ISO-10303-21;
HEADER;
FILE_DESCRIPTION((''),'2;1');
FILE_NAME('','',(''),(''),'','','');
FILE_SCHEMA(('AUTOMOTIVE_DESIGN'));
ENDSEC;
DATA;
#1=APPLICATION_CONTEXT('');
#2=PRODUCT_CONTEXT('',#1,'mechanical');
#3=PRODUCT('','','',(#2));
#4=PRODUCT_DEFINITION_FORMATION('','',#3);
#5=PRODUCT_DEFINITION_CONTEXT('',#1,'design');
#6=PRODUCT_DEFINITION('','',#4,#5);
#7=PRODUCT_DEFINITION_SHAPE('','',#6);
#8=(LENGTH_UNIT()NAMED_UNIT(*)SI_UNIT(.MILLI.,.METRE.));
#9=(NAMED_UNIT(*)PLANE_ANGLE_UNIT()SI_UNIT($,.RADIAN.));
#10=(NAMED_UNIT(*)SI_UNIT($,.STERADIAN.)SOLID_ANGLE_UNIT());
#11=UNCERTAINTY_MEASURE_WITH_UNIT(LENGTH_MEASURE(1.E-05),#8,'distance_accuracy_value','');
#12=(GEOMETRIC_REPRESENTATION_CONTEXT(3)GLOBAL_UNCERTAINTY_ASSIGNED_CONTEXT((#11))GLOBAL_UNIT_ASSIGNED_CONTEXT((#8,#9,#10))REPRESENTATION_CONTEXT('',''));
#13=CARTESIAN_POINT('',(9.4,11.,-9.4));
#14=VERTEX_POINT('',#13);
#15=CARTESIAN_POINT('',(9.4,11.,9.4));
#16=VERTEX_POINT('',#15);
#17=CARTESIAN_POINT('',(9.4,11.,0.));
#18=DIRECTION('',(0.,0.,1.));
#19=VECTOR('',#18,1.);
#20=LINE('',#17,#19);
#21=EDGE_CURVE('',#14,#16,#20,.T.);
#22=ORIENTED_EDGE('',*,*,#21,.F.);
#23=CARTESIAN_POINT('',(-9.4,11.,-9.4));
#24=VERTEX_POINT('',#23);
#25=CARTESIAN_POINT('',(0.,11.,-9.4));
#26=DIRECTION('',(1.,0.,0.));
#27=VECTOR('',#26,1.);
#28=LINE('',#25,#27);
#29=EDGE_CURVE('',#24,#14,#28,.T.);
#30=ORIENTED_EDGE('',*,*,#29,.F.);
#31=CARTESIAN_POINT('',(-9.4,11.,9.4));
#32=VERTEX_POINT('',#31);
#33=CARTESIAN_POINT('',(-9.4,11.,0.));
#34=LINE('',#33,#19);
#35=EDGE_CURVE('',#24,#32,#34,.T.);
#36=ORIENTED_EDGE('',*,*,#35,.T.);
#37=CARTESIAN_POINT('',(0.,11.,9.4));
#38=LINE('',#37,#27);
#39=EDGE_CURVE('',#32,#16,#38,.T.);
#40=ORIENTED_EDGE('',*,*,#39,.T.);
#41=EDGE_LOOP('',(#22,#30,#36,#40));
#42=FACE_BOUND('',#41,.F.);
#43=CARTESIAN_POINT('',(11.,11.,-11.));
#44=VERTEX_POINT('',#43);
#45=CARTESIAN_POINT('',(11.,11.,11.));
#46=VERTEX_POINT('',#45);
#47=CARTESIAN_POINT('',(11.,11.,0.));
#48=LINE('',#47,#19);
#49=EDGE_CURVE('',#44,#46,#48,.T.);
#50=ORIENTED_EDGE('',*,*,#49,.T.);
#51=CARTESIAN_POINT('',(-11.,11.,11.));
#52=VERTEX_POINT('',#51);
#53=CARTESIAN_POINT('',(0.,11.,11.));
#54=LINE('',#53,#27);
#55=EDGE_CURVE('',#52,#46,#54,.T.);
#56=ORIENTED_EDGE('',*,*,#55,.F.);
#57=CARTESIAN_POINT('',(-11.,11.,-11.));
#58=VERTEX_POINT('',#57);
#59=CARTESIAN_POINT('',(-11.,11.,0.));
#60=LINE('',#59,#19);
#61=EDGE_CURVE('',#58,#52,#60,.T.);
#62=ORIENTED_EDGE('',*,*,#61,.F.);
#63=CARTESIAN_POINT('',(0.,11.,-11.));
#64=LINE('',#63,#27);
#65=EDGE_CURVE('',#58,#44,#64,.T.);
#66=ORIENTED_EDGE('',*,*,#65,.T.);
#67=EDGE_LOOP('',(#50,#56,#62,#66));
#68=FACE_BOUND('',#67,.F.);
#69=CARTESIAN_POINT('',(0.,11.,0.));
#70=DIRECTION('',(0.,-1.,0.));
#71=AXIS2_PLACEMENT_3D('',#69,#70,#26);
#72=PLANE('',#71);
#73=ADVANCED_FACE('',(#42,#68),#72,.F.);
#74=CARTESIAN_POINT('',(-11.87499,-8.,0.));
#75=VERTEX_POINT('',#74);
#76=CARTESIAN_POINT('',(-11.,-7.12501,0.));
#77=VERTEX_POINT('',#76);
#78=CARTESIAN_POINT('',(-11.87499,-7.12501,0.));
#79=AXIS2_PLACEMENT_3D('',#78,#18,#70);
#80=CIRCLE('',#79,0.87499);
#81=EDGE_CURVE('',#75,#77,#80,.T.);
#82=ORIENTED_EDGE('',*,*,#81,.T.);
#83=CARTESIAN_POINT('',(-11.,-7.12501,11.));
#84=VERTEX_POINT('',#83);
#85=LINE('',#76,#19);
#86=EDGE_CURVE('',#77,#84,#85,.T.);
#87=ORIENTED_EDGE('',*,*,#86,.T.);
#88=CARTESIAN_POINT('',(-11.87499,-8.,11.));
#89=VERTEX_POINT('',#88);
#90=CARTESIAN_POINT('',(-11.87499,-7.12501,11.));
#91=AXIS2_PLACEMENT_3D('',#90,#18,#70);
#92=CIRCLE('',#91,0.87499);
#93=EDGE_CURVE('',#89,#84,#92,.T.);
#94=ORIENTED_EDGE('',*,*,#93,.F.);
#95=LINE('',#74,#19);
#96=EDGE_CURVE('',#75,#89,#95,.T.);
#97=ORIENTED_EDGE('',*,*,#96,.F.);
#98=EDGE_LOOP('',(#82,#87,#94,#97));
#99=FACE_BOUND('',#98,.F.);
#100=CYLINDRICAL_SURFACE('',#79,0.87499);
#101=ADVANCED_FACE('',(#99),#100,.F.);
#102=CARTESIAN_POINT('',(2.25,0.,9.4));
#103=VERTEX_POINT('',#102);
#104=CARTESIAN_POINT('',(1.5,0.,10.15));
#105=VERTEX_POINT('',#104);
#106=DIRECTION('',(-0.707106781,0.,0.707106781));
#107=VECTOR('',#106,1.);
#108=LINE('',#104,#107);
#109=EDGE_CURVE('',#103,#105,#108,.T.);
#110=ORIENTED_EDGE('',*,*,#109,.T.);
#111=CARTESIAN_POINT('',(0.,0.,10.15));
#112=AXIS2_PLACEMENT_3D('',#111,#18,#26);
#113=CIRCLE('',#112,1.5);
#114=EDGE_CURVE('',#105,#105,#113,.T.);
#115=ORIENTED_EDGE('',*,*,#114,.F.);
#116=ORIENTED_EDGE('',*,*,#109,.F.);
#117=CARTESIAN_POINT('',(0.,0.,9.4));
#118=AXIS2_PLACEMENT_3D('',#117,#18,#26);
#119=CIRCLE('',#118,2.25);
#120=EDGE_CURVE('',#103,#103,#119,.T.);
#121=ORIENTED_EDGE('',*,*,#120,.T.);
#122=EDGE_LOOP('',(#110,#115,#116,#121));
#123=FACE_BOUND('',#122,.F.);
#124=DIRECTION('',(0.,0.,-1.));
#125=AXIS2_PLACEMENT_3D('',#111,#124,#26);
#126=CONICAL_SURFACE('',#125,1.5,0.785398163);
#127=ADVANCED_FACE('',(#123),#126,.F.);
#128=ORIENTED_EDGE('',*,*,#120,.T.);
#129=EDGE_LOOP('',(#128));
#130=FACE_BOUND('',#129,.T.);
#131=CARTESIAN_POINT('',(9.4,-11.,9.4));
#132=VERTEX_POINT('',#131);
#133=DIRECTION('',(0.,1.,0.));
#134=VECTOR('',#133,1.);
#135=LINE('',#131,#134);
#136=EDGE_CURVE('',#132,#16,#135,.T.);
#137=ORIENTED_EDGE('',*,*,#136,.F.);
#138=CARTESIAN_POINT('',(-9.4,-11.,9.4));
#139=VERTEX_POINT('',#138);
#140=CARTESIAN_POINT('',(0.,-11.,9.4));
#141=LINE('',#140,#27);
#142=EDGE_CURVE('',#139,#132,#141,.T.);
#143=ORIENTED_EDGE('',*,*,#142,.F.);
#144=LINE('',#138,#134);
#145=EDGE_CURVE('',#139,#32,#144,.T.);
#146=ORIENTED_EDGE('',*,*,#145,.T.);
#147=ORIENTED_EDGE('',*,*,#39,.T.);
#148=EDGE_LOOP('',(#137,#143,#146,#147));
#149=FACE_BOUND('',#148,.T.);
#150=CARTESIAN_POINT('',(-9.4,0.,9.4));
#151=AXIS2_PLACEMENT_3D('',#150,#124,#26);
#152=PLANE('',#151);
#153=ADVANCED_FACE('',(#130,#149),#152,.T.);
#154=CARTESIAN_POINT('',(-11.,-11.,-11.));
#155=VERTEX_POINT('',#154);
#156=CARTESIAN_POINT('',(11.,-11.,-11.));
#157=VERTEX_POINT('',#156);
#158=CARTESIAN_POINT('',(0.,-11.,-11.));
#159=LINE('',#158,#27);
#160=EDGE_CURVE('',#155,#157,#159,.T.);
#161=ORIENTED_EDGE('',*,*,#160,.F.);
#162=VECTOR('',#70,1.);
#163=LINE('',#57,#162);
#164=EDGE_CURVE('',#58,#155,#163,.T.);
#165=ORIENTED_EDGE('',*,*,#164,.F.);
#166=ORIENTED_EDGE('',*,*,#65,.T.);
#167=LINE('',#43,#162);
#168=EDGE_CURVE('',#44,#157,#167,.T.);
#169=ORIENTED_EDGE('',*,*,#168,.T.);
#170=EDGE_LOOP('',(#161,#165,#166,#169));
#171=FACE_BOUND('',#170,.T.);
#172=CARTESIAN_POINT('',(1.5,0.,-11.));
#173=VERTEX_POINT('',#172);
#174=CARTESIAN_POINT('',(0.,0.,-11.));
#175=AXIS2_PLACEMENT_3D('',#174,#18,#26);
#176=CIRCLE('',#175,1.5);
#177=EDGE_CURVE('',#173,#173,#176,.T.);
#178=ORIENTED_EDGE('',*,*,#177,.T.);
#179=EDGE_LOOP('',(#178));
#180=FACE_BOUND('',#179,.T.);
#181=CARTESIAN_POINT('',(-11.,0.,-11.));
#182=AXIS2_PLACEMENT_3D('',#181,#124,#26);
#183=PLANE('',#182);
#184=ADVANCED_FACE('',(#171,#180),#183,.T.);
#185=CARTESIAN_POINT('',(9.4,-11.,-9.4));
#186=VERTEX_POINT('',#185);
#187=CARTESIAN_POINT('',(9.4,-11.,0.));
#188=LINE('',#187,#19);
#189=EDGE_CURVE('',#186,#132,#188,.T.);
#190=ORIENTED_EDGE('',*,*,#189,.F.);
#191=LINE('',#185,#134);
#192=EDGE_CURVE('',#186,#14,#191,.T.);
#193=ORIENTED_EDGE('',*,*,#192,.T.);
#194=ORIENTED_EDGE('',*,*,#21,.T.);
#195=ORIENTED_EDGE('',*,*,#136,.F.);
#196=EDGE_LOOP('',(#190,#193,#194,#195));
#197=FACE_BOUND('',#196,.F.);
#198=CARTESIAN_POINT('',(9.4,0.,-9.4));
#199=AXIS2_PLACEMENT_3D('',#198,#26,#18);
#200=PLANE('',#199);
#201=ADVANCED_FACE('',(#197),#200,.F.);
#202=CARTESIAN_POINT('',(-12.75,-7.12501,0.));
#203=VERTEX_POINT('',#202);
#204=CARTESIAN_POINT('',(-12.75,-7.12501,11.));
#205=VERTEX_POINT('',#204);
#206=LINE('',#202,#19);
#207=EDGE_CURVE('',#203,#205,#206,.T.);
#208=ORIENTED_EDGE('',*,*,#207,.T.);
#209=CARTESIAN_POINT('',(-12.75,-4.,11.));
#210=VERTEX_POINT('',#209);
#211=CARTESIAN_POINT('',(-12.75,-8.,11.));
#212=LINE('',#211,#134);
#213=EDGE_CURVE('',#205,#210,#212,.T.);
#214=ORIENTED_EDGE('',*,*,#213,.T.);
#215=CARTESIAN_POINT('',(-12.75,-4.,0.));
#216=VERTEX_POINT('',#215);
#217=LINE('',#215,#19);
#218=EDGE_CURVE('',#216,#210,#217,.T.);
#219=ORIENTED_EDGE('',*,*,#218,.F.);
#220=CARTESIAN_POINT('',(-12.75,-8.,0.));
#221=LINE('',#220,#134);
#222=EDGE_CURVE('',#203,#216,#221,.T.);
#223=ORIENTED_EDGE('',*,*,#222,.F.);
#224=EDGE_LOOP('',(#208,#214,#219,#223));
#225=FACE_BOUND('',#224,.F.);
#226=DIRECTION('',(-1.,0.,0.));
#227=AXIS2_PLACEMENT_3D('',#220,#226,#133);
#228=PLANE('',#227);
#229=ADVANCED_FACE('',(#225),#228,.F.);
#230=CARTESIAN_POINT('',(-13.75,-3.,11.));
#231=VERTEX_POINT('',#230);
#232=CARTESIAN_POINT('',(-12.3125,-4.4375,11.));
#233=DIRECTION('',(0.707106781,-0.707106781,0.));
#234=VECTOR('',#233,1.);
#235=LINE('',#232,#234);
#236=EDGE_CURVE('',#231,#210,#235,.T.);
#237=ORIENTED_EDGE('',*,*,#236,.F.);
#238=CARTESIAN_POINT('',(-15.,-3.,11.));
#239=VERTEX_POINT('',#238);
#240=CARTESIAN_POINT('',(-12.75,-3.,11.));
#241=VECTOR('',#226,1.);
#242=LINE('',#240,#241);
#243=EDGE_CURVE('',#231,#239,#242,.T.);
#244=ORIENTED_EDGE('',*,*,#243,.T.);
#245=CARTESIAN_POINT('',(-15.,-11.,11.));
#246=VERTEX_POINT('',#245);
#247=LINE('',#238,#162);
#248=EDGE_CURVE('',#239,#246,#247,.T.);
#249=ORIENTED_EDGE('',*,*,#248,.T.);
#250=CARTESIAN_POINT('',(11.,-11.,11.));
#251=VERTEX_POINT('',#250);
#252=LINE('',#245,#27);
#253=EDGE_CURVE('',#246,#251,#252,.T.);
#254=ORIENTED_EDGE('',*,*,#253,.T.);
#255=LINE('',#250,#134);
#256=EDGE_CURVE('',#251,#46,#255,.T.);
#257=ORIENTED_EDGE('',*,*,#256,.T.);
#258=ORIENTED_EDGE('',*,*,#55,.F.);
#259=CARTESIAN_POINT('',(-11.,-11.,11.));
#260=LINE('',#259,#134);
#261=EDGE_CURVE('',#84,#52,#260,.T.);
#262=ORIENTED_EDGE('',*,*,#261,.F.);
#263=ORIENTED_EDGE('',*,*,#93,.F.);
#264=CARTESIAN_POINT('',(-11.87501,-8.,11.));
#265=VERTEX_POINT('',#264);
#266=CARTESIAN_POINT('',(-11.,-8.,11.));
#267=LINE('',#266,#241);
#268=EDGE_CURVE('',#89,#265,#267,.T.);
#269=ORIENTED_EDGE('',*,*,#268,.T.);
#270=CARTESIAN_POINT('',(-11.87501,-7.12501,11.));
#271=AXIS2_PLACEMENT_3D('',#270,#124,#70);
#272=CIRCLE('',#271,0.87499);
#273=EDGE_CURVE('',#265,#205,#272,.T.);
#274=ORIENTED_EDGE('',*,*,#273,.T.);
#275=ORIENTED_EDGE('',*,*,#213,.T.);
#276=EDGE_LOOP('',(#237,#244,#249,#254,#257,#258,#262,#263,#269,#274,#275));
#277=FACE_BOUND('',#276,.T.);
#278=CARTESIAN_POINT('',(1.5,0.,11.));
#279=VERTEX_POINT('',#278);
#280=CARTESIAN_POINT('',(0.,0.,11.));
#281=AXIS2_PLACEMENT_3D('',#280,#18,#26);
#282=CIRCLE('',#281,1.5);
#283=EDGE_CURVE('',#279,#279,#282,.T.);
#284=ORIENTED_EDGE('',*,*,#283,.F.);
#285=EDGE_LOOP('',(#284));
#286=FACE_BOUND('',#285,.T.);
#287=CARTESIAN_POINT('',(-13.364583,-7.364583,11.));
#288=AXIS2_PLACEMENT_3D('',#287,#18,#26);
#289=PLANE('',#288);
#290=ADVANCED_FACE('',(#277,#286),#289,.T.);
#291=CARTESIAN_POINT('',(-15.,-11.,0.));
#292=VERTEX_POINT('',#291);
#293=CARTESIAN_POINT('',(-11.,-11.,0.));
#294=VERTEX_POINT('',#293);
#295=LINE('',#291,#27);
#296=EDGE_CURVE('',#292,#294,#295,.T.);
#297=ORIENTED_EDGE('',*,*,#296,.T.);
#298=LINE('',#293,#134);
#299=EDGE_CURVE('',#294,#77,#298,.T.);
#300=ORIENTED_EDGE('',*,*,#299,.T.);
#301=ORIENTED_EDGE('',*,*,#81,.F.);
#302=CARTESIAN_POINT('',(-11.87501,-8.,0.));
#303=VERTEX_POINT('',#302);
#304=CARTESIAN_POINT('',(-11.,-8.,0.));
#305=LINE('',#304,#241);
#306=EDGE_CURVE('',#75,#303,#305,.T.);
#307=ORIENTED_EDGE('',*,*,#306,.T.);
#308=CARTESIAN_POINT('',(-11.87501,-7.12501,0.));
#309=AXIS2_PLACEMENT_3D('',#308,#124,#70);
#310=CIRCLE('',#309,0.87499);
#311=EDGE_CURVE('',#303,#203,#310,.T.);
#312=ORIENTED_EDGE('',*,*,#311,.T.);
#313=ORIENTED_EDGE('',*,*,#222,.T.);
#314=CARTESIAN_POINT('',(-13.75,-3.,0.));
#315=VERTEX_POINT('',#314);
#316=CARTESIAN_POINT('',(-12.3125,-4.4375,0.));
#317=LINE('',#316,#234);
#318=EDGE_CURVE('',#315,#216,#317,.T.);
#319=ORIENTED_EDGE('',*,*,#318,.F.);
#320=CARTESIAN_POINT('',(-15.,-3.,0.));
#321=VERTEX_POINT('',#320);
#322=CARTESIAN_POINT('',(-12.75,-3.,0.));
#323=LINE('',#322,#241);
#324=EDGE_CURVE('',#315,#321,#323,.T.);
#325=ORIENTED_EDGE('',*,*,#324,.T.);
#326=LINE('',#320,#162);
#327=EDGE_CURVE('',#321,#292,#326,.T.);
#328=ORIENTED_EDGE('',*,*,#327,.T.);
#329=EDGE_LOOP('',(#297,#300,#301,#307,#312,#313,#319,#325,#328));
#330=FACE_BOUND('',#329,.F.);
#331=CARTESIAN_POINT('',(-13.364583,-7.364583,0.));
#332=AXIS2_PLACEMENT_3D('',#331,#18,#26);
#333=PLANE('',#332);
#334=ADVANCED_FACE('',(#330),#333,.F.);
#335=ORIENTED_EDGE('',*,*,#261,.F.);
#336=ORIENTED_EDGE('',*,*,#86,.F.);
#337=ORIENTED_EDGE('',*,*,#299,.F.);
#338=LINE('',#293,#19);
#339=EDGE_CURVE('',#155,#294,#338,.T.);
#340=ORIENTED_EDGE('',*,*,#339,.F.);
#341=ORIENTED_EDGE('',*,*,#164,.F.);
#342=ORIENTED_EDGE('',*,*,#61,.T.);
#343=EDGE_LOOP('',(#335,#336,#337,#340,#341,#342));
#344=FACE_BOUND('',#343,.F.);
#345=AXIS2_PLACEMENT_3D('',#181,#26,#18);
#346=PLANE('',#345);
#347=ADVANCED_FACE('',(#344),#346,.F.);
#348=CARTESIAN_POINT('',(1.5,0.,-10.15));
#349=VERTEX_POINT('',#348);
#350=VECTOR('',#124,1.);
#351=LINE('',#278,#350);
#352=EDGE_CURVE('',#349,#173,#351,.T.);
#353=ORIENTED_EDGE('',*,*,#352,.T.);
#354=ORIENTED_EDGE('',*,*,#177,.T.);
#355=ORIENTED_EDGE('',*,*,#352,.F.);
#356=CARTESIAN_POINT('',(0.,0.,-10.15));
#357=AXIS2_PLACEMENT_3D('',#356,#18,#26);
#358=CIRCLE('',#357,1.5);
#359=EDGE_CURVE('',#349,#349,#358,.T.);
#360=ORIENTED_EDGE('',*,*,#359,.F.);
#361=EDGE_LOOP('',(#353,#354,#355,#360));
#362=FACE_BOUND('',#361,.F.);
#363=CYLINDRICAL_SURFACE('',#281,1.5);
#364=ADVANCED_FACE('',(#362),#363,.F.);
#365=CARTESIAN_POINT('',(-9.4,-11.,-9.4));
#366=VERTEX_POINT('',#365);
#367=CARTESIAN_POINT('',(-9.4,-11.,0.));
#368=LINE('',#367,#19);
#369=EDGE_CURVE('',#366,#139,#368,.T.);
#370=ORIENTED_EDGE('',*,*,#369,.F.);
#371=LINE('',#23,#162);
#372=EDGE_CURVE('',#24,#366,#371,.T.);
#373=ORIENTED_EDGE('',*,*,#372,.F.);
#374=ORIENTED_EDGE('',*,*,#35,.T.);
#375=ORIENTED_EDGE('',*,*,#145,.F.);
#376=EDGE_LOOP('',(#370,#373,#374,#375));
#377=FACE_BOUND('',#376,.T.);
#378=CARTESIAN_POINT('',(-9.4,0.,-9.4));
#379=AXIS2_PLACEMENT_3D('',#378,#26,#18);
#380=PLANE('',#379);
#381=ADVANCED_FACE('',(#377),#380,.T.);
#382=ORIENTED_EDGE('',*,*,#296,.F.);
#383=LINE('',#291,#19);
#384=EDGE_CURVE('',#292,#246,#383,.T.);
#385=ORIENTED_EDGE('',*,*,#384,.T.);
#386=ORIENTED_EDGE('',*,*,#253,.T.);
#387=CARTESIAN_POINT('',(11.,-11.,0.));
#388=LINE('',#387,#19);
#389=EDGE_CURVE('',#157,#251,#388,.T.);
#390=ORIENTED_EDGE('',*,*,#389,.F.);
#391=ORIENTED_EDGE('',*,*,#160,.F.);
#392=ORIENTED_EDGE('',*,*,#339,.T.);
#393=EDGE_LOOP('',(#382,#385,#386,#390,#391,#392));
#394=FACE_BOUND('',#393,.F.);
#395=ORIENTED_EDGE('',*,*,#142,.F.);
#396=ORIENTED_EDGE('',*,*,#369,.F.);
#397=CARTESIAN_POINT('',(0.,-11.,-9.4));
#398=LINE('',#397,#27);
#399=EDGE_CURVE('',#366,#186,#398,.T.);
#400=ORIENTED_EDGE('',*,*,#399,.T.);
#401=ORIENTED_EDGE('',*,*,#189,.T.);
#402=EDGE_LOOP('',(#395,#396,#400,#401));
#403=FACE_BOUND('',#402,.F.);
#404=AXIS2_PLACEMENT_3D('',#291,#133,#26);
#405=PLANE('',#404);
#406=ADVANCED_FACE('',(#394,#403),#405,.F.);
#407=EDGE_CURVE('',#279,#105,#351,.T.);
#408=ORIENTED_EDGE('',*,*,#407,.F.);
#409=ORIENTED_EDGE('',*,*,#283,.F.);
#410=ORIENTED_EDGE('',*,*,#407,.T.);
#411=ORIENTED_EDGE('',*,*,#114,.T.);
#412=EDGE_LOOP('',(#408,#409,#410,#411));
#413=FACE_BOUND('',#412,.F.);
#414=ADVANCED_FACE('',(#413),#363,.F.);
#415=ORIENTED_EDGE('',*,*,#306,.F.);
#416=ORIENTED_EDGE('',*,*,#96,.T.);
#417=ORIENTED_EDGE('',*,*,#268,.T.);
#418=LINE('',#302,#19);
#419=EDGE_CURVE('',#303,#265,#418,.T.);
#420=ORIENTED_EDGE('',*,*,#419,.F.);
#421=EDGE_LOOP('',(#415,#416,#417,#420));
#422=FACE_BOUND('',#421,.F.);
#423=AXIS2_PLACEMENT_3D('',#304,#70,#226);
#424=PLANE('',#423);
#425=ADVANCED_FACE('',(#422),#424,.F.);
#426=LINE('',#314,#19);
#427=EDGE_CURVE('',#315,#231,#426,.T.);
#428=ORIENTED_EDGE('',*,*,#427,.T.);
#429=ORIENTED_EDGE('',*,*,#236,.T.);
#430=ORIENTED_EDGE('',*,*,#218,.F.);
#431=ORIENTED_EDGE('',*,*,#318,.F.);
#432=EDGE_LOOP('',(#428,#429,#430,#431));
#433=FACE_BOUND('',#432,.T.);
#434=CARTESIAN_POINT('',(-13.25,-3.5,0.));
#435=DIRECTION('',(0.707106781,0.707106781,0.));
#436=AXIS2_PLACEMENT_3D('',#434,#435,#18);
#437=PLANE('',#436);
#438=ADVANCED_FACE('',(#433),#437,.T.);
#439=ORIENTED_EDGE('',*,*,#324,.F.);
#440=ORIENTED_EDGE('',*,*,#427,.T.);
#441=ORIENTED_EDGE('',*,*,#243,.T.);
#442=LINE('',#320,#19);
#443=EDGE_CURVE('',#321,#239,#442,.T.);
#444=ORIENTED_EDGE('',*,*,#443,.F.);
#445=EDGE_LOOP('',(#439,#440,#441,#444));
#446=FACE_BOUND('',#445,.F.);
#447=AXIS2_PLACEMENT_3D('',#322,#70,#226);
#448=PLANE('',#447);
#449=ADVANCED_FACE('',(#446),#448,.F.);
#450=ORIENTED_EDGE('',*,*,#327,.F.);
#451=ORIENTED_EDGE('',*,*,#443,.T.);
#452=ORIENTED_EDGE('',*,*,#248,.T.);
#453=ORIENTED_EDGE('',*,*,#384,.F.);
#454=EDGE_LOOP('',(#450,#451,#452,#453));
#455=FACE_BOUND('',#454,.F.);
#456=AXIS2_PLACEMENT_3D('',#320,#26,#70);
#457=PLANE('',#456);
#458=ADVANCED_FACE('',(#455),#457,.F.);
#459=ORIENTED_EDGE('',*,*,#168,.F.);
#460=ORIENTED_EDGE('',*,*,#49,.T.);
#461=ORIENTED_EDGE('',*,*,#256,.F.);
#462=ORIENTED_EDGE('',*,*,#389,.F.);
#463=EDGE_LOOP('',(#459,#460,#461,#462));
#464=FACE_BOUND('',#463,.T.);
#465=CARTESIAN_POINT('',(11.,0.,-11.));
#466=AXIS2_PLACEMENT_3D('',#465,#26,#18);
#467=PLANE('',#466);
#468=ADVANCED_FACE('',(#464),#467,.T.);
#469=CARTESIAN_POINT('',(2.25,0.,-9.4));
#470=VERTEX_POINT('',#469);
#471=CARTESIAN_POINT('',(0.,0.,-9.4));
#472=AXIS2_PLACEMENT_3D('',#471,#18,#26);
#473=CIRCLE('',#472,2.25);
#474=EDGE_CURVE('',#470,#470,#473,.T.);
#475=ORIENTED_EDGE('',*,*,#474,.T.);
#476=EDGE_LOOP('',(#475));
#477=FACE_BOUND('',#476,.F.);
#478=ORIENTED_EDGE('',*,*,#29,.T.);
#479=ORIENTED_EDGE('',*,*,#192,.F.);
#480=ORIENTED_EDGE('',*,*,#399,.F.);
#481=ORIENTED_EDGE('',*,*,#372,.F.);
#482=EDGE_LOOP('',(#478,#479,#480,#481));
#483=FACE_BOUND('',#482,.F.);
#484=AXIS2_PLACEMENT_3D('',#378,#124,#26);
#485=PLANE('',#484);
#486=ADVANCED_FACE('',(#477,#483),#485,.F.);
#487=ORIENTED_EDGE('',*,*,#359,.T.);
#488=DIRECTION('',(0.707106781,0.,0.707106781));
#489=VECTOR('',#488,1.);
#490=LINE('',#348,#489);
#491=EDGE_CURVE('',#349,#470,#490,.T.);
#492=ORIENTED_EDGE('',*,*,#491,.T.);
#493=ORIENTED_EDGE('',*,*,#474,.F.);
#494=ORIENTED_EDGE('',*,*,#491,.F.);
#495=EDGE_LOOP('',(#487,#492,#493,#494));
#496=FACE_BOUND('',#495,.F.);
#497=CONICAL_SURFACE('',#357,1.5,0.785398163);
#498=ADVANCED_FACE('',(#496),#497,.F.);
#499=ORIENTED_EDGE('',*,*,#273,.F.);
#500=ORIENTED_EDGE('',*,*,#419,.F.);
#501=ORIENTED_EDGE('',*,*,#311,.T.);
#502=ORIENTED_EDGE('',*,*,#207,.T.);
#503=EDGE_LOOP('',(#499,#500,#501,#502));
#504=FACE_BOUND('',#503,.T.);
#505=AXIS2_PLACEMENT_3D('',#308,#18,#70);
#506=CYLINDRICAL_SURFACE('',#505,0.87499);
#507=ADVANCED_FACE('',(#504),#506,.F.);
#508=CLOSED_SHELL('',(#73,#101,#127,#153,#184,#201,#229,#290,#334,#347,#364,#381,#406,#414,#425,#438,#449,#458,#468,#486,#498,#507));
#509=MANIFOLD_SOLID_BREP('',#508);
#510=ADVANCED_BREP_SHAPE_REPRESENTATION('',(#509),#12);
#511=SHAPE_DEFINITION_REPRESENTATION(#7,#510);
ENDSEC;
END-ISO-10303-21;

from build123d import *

# Parameters (mm, degrees)
F0_W     = 22
F0_H     = 22
F0_W_2   = 18.8
F0_H_2   = 18.8
F1_DEPTH = 11
F2_R     = 1.5
F3_DEPTH = 25
F4_SIZE  = 0.75
F6_DEPTH = 11
F7_R     = 0.87499
F8_SIZE  = 1


# Not quite as in the source:
# - a fillet or chamfer is up to 0.001 mm smaller than in the source, because OpenCascade refuses the exact size


with BuildPart() as f1:
    # F0 (on Front) → F1 (new body, symmetric)
    with BuildSketch(Plane.XZ):
        Rectangle(F0_W, F0_H)
        Rectangle(F0_W_2, F0_H_2, mode=Mode.SUBTRACT)
    extrude(amount=F1_DEPTH, both=True)

    # F2 (on face) → F3 (cut)
    with BuildSketch(Plane.XY.offset(11)):
        Circle(F2_R)
    extrude(amount=-F3_DEPTH, mode=Mode.SUBTRACT)

    # F4
    f4_edges = [f1.edges().sort_by_distance(p)[0] for p in [
        (-1.5, 0, -9.4),
        (-1.5, 0, 9.4),
    ]]
    chamfer(f4_edges, length=F4_SIZE)

    # F5 (on Top) → F6 (join, through all)
    with BuildSketch(Plane.XY):
        Polygon((-12.75, -3), (-15, -3), (-15, -11), (-11, -11), (-11, -8), (-12.75, -8), align=None)
    extrude(amount=F6_DEPTH)

    # F7 (radius 0.875 in the source; OpenCascade refuses exactly that, so slightly less here)
    f7_edges = [f1.edges().sort_by_distance(p)[0] for p in [
        (-12.75, -8, 5.5),
        (-11, -8, 5.5),
    ]]
    fillet(f7_edges, radius=F7_R)

    # F8
    f8_edges = [f1.edges().sort_by_distance(p)[0] for p in [
        (-12.75, -3, 5.5),
    ]]
    chamfer(f8_edges, length=F8_SIZE)


solid = f1.part
